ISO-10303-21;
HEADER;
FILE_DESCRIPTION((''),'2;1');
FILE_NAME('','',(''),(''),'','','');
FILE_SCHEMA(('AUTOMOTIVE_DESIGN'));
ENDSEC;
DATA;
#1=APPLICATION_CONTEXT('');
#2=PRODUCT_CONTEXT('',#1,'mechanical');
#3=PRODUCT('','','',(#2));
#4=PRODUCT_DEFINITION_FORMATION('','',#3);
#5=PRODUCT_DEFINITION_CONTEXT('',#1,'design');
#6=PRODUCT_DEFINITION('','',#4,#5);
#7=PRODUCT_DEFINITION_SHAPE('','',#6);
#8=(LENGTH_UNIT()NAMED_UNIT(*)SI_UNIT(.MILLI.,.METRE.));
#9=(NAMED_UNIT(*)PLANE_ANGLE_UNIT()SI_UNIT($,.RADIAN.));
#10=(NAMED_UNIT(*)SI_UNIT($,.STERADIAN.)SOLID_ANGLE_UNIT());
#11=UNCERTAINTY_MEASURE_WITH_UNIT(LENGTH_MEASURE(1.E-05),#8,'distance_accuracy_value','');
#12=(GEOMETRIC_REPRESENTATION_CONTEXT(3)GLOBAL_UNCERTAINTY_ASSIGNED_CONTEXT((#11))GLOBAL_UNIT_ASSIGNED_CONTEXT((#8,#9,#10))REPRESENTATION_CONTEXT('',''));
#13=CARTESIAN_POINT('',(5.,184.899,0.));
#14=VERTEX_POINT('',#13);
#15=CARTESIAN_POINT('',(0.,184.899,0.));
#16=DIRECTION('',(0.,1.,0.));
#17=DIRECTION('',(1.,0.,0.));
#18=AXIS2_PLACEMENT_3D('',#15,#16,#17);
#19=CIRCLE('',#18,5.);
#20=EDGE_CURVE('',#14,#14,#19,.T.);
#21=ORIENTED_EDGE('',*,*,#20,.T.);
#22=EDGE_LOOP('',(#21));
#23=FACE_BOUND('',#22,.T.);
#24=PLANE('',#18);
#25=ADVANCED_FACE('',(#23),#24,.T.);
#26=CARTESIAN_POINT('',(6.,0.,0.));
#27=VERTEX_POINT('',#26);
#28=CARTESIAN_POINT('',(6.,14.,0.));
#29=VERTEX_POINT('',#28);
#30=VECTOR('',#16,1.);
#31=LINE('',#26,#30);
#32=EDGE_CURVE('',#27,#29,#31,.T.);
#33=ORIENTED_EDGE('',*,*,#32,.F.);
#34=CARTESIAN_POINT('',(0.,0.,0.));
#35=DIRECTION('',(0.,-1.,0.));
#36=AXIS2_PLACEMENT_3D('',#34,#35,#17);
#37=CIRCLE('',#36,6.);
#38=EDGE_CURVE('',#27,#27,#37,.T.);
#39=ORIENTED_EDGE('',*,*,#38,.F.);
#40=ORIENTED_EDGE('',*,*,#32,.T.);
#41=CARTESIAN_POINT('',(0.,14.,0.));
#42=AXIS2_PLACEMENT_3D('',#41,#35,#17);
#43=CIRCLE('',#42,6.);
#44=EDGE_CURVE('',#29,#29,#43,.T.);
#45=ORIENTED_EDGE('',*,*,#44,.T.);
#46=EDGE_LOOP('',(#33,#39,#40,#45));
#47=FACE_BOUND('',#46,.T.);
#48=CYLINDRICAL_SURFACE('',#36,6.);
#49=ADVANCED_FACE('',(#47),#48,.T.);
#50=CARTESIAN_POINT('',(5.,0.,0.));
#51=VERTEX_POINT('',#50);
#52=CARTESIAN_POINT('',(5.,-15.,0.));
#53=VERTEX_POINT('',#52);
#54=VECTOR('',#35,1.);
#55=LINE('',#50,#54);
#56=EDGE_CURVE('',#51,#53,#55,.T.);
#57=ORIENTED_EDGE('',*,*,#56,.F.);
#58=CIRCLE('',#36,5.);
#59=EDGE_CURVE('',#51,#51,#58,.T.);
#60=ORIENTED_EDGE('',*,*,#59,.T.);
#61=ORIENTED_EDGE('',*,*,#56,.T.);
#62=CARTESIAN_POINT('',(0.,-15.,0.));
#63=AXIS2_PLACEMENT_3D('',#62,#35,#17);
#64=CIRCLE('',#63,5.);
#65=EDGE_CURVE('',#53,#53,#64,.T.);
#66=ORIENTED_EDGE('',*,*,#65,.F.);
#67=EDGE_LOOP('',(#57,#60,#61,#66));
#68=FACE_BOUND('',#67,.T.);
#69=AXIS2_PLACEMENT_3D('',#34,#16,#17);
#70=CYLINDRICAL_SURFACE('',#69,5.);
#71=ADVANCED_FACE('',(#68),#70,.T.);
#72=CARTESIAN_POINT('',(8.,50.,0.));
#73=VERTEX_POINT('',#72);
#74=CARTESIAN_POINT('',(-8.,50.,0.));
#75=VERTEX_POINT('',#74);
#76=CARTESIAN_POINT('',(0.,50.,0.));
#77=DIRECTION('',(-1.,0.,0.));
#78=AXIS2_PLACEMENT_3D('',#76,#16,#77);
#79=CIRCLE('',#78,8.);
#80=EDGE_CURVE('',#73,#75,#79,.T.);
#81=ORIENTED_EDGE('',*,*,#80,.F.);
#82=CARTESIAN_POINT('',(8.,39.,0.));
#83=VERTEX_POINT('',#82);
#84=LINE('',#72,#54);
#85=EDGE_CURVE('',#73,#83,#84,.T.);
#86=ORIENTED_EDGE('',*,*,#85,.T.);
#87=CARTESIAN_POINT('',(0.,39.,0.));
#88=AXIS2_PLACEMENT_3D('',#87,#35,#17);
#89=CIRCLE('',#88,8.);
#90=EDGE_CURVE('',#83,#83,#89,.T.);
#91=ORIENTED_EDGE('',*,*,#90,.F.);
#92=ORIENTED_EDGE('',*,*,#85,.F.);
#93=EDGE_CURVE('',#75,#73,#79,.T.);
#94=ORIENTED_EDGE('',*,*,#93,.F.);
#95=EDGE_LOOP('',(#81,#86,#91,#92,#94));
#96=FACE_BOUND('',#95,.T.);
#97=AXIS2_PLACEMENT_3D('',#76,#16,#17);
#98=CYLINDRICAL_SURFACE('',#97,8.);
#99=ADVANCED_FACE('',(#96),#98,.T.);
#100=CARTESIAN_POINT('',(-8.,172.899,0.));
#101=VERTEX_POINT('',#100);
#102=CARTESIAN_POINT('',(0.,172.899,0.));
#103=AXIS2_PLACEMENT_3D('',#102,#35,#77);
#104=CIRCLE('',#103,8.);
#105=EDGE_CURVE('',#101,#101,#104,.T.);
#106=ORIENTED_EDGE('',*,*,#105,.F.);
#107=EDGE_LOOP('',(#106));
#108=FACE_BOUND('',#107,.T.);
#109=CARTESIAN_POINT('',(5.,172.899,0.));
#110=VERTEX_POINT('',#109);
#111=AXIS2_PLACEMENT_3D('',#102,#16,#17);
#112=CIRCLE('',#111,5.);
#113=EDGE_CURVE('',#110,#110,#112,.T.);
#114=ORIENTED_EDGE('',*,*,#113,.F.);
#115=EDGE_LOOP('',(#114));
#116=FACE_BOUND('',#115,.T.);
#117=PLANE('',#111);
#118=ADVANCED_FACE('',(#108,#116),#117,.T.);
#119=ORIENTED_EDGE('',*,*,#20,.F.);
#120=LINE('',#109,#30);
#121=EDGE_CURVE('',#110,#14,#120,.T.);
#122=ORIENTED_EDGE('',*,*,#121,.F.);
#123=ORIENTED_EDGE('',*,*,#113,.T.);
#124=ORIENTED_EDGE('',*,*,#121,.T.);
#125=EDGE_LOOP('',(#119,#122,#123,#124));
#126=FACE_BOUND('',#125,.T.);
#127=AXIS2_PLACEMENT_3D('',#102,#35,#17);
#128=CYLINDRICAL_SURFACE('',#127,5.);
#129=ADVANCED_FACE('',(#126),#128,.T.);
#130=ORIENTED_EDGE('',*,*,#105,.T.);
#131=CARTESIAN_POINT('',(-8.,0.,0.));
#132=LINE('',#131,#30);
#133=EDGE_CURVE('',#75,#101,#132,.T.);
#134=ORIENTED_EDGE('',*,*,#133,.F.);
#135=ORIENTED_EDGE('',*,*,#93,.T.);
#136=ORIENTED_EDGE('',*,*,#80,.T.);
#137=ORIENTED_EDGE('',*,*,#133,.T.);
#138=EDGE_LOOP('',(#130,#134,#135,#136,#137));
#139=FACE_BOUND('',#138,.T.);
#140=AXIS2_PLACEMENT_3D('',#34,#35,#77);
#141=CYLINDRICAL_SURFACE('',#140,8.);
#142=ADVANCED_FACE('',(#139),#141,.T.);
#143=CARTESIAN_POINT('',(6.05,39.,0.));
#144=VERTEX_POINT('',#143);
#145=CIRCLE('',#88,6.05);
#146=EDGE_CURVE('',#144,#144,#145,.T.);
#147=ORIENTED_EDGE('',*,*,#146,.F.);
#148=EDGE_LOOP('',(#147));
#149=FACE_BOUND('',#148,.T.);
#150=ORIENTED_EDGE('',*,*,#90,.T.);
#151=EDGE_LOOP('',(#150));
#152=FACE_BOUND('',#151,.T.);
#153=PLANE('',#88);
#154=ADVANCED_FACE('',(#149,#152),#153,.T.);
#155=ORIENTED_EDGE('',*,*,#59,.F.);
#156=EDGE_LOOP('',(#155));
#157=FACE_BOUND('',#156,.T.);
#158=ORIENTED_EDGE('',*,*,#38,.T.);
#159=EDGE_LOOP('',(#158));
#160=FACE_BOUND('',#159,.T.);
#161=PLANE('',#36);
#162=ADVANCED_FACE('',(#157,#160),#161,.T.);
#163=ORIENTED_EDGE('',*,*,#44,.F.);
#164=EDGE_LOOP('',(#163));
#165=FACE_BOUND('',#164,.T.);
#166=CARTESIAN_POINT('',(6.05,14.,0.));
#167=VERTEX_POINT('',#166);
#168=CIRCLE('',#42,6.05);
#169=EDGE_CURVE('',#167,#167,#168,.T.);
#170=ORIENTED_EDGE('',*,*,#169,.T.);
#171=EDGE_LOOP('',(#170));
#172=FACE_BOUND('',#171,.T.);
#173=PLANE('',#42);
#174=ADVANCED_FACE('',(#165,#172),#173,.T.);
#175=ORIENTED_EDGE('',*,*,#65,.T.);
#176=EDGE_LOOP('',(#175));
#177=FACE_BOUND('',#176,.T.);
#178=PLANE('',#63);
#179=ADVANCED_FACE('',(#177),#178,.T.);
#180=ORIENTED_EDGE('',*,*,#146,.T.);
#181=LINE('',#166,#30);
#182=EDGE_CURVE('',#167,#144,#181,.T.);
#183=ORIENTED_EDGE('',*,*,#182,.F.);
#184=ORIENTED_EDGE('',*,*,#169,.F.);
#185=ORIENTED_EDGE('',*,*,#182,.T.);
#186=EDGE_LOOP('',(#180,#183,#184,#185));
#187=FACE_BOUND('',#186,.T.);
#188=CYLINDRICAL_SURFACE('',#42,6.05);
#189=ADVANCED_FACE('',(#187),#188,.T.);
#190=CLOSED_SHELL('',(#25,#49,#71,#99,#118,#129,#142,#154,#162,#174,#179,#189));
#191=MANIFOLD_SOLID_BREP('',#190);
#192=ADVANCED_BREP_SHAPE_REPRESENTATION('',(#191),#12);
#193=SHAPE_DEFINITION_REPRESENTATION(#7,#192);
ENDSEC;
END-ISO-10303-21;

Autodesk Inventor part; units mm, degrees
ref_plane "YZ Plane" through (0, 0, 0) normal (1, 0, 0) x (0, 1, 0)
ref_plane "XZ Plane" through (0, 0, 0) normal (0, 1, 0) x (-1, 0, 0)
ref_plane "XY Plane" through (0, 0, 0) normal (0, 0, 1) x (1, 0, 0)
sketch "Sketch1" plane through (0, 0, 0) normal (0, 1, 0) x (-1, 0, 0)
  circle A0 centre (0, 0) radius 8
  dimension "d0" = 16
extrude "Extrusion1" add sketch "Sketch1" along normal blind 200
sketch "Sketch2" plane through (0, 0, 0) normal (0, -1, 0) x (1, 0, 0)
  circle A0 centre (0, 0) radius 8 projected
extrude "Extrusion2" cut sketch "Sketch2" against normal blind 50
sketch "Sketch3" plane through (0, 50, 0) normal (0, -1, 0) x (1, 0, 0)
  circle A0 centre (0, 0) radius 8 projected
extrude "Extrusion3" add sketch "Sketch3" along normal blind 50
sketch "Sketch4" plane through (0, 0, 0) normal (0, -1, 0) x (1, 0, 0)
  circle A0 centre (0, 0) radius 8 projected
  circle A1 centre (0, 0) radius 6
  dimension "d7" = 12
extrude "Extrusion4" cut sketch "Sketch4" against normal blind 14
thread "Thread1" size "M12x1" class "6g" standard "ANSI Metric M Profile" full length
sketch "Sketch6" plane through (0, 14, 0) normal (0, -1, 0) x (1, 0, 0)
  circle A0 centre (0, 0) radius 8 projected
  circle A1 centre (0, 0) radius 6.05
  dimension "d13" = 12.1
extrude "Extrusion5" cut sketch "Sketch6" against normal blind 25
sketch "Sketch7" plane through (0, 0, 0) normal (0, -1, 0) x (1, 0, 0)
  circle A0 centre (0, 0) radius 6 projected
  circle A1 centre (0, 0) radius 5
  dimension "d16" = 10
extrude "Extrusion6" add sketch "Sketch7" along normal blind 15 contours A1
sketch "Sketch8" plane through (0, 200, 0) normal (0, 1, 0) x (1, 0, 0)
  circle A0 centre (0, 0) radius 8 projected
extrude "Extrusion7" cut sketch "Sketch8" against normal blind 27.101
sketch "Sketch9" plane through (0, 172.899, 0) normal (0, 1, 0) x (1, 0, 0)
  circle A0 centre (0, 0) radius 8 projected
  circle A1 centre (0, 0) radius 5
  dimension "d21" = 10
extrude "Extrusion8" add sketch "Sketch9" along normal blind 12 contours A1
properties part number "1605_200mm"
